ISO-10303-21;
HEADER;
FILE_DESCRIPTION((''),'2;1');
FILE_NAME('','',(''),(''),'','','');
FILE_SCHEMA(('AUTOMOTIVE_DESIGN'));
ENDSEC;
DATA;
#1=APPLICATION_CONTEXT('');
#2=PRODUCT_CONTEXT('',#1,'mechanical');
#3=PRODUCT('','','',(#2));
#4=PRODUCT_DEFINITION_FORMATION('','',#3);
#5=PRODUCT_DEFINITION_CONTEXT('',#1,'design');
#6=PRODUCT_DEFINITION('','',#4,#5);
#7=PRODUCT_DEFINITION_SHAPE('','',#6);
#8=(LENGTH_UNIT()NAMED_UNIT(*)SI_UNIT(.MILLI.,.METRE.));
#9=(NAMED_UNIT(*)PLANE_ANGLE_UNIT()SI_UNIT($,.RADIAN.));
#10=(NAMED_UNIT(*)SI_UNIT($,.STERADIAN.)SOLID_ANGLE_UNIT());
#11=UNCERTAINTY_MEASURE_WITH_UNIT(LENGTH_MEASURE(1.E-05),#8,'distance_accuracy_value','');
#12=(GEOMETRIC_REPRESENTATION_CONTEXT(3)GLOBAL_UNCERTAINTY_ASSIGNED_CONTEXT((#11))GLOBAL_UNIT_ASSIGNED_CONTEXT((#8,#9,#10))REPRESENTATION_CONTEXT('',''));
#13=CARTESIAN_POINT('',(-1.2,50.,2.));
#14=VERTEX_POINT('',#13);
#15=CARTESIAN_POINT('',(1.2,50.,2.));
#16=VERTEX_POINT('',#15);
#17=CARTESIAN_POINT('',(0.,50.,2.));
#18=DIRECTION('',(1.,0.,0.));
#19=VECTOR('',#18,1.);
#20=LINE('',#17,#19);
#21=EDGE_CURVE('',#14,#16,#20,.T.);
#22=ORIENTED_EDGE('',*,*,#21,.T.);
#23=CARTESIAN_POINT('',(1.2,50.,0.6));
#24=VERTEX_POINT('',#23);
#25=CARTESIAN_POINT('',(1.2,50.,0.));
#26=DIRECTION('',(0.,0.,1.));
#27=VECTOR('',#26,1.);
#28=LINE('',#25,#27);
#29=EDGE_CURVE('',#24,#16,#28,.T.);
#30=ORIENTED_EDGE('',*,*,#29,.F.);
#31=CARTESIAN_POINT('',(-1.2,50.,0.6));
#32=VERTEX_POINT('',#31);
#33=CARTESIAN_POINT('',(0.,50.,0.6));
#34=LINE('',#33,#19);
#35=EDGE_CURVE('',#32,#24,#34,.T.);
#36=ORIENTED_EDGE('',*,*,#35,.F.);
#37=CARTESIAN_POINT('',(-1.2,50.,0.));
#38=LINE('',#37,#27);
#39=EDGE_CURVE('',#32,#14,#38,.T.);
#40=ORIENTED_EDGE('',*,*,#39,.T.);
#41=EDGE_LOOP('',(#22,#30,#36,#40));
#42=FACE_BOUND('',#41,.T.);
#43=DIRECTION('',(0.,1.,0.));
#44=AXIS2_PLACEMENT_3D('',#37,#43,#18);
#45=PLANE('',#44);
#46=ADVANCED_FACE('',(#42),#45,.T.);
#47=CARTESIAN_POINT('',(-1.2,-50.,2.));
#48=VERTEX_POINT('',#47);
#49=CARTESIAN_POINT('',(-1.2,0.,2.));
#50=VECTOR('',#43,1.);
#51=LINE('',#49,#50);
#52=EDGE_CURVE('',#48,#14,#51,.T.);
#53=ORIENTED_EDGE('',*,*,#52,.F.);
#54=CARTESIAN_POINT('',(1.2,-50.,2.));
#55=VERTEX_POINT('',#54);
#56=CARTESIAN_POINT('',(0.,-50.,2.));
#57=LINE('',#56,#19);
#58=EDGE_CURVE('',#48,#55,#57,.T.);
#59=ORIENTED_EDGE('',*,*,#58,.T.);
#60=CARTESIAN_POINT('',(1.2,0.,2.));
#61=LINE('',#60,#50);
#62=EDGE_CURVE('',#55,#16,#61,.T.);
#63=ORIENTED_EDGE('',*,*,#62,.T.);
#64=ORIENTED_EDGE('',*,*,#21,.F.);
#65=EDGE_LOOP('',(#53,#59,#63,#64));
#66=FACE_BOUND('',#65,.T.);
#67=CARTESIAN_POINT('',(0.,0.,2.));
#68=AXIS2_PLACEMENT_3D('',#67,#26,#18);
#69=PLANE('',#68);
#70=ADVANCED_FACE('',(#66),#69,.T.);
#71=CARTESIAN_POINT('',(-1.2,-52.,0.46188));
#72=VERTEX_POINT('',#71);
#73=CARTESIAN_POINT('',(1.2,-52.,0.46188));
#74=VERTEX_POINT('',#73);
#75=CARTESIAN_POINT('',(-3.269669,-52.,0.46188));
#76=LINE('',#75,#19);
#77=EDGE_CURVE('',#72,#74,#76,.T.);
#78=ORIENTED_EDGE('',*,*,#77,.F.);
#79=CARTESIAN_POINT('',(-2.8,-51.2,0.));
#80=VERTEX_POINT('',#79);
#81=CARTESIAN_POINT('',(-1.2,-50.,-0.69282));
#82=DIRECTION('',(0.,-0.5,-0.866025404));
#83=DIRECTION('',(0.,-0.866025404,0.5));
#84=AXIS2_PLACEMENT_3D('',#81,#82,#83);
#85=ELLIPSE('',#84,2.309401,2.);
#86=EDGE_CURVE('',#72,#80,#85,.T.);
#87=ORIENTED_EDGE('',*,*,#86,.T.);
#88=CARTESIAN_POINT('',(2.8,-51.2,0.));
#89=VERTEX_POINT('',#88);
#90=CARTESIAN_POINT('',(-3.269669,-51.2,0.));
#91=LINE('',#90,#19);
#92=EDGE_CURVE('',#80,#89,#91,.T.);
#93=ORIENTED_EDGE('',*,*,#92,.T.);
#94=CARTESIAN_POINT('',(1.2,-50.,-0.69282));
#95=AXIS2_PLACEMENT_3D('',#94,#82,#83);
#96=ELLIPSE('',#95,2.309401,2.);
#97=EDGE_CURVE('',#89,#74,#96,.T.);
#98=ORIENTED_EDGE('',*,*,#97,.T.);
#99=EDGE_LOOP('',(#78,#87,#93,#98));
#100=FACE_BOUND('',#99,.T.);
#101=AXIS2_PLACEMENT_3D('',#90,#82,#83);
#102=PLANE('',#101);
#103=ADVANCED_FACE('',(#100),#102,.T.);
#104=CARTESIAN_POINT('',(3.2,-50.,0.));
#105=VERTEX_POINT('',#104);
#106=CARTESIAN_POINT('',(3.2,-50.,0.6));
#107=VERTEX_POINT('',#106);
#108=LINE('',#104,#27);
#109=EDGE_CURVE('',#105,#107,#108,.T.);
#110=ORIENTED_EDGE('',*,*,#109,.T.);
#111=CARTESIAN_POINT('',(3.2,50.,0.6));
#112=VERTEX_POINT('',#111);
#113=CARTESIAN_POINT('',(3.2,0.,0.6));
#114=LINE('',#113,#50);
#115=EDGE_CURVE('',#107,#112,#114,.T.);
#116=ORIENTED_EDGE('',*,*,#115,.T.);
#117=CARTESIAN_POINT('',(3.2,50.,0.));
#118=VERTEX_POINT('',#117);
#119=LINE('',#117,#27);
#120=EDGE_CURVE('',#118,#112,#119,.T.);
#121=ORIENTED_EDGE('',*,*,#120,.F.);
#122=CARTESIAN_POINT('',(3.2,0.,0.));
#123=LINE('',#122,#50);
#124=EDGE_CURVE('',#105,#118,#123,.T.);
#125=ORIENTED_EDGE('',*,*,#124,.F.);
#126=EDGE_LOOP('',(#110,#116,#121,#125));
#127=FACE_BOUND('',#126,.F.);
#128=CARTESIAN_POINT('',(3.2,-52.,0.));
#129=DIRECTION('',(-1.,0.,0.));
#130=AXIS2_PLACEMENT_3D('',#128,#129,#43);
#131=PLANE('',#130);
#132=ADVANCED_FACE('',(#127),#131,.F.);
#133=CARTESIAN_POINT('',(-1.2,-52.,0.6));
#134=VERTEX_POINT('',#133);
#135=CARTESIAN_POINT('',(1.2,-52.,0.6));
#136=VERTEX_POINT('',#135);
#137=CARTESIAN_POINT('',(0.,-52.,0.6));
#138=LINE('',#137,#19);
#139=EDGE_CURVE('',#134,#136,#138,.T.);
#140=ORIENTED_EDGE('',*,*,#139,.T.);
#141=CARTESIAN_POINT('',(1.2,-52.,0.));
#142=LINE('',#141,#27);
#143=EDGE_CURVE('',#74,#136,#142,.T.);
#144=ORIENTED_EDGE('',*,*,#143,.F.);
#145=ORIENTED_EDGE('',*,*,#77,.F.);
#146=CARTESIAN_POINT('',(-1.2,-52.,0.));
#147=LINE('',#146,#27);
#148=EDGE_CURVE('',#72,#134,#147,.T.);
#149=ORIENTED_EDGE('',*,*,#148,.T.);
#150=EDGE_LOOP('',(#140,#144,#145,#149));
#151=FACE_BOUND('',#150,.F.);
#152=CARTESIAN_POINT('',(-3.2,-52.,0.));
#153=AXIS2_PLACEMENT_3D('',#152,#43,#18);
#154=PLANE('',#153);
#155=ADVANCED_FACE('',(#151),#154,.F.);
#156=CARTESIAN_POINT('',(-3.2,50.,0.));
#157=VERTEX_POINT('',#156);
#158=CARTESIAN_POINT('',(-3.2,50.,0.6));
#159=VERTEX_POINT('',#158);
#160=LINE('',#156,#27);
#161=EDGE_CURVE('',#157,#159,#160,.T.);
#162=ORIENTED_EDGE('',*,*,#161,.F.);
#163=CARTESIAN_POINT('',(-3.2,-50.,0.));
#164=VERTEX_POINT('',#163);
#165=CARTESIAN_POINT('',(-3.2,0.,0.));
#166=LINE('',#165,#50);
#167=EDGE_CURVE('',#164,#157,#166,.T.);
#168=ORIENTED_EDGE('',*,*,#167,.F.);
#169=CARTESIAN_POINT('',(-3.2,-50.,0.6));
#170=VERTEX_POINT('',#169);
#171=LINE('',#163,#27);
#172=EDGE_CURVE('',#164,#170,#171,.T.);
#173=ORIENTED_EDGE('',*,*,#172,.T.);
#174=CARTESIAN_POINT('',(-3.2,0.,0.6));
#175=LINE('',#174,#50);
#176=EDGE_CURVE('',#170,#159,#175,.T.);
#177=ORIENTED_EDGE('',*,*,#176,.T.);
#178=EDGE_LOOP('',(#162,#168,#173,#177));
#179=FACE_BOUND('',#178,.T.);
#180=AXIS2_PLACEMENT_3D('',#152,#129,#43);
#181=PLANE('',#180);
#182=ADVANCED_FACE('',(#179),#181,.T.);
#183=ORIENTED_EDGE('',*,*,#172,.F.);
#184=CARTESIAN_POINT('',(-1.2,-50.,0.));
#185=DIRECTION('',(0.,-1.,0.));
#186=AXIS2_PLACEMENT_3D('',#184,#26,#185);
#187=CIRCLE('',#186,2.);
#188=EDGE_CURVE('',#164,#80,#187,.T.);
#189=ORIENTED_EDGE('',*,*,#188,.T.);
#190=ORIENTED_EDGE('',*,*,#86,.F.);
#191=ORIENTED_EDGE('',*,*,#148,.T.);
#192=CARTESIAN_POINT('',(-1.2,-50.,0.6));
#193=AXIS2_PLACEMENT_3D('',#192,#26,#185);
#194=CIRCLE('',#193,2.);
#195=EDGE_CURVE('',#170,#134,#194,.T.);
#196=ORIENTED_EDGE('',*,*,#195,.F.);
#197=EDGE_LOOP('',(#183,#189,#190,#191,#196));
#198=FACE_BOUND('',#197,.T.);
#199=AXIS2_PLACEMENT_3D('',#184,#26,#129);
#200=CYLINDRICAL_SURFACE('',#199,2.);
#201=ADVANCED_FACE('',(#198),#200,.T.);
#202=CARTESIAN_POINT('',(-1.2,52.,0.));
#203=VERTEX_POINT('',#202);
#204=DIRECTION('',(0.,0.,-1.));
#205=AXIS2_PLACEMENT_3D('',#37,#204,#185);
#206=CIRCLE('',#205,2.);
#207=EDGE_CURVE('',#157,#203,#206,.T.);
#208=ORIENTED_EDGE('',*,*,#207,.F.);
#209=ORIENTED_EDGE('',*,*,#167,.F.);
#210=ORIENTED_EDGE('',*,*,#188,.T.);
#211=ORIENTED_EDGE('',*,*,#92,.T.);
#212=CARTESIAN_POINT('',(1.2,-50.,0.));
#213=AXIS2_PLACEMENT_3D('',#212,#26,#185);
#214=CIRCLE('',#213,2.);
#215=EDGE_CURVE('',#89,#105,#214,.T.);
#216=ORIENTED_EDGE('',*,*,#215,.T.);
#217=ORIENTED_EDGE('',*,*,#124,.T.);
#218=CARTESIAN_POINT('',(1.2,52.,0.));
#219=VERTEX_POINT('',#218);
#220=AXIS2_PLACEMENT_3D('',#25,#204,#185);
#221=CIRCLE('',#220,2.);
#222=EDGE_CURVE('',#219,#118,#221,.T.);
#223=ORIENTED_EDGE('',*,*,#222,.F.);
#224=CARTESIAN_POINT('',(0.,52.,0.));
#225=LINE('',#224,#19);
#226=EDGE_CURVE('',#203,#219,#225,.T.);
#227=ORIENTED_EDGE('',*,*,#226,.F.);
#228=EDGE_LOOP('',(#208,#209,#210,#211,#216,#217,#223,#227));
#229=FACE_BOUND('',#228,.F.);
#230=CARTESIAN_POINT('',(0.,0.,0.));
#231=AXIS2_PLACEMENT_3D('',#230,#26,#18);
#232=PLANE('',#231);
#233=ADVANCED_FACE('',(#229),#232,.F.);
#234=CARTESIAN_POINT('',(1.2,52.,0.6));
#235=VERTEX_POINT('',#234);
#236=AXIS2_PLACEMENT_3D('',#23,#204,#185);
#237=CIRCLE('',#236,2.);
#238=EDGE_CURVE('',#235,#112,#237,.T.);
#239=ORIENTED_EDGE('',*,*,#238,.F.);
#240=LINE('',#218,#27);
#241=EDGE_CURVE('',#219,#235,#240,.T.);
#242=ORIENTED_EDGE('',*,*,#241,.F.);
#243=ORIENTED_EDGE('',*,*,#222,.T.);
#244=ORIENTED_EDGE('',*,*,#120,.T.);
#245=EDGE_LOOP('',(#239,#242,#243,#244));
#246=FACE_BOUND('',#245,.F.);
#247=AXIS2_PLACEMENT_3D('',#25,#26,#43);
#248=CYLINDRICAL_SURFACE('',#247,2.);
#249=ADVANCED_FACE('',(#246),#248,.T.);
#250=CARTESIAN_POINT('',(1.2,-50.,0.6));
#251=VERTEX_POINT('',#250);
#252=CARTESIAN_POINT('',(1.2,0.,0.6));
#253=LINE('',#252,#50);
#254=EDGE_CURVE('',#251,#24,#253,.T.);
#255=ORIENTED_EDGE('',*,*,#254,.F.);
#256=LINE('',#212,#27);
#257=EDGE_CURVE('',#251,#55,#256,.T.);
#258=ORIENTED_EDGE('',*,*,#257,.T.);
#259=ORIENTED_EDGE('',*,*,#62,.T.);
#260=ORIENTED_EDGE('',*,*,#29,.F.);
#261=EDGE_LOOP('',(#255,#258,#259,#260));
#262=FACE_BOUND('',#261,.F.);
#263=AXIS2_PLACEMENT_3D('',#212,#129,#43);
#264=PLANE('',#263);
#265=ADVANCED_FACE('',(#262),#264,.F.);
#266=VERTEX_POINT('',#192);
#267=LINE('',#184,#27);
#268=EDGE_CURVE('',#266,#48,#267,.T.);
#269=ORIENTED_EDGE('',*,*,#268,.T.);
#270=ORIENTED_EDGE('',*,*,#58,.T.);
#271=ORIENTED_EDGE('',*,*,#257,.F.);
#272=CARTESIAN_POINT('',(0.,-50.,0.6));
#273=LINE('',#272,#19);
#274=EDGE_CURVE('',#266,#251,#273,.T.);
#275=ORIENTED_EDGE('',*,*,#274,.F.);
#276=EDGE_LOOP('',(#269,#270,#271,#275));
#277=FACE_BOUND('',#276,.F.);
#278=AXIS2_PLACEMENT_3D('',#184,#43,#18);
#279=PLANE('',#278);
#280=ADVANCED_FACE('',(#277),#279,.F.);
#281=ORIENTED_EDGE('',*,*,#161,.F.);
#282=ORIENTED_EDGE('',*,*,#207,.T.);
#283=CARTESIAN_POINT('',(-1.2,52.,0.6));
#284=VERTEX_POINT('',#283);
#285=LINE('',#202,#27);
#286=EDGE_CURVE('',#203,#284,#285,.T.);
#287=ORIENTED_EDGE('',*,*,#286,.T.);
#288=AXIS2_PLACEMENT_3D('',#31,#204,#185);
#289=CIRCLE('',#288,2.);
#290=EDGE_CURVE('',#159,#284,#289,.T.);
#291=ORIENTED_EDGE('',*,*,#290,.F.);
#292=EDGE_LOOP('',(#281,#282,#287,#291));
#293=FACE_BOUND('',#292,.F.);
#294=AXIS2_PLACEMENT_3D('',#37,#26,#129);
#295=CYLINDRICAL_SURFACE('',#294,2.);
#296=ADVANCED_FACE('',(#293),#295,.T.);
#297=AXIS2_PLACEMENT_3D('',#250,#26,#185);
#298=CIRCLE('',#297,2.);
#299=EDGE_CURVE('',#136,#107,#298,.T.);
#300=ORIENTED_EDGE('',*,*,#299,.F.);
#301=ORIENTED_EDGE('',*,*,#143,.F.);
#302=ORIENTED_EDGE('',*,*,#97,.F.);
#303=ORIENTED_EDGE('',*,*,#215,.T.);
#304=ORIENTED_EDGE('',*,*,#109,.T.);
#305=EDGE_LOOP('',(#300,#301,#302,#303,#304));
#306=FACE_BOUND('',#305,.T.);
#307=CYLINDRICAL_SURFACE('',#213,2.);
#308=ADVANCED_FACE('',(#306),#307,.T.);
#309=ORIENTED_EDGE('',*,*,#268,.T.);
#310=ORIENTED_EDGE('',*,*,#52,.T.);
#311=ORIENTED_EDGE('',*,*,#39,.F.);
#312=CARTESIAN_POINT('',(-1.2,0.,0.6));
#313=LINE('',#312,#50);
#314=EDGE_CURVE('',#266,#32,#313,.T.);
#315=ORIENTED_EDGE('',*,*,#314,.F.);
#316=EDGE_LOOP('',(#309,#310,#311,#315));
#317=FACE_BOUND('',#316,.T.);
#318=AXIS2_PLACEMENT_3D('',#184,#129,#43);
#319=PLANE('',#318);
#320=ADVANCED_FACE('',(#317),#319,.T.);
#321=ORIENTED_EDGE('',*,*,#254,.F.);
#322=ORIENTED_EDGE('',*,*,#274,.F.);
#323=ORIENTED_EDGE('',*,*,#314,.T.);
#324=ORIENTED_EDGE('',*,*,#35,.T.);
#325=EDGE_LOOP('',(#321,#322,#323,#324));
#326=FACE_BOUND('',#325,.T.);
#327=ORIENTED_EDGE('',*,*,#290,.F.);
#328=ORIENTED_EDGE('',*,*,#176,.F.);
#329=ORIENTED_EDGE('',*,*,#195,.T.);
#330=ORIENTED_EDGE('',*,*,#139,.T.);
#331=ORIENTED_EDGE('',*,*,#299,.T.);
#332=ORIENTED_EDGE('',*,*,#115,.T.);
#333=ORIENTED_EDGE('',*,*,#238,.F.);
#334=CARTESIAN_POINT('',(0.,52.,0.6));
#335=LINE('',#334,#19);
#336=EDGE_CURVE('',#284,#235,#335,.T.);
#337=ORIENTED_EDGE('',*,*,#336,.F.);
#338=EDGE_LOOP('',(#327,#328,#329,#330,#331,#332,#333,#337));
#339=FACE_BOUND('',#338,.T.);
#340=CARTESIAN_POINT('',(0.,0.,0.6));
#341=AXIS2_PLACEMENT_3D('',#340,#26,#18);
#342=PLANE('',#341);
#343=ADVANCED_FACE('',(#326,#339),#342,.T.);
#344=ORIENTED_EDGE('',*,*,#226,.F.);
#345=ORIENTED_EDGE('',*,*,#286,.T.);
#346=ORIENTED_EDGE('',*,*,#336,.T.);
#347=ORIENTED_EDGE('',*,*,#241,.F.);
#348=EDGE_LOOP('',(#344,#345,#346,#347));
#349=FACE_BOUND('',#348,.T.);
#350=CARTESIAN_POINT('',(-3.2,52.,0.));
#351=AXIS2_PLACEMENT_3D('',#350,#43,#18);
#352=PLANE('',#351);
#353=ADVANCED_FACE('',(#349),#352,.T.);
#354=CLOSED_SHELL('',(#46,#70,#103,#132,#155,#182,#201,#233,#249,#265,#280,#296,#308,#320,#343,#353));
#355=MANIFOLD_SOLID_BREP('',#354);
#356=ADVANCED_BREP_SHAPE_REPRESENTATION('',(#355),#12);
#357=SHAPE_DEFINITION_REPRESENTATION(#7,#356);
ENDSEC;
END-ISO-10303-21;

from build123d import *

# Parameters (mm, degrees)
F0_W        = 6.4
F0_H        = 104
F0_W_2      = 2.4
F0_H_2      = 100
F1_DEPTH    = 0.6
F2_DEPTH    = 2
F3_R        = 2
F4_T1_DEPTH = 6.5393372074


# Not quite as in the source:
# - a fillet or chamfer that OpenCascade refuses, or shapes differently, is made with other operations: its cross-section is extruded or revolved along the edge and cut away or added


with BuildPart() as f1:
    # F0 (on Top) → F1 (new body)
    with BuildSketch(Plane.XY):
        Rectangle(F0_W, F0_H)
        Rectangle(F0_W_2, F0_H_2, mode=Mode.SUBTRACT)
    extrude(amount=F1_DEPTH)

    # F0 (on Top) → F2 (join)
    with BuildSketch(Plane.XY):
        Rectangle(F0_W_2, F0_H_2)
    extrude(amount=F2_DEPTH)

    # F3
    f3_edges = [f1.edges().sort_by_distance(p)[0] for p in [
        (-3.2, -52, 0.3),
        (-3.2, 52, 0.3),
        (3.2, 52, 0.3),
        (3.2, -52, 0.3),
    ]]
    fillet(f3_edges, radius=F3_R)

    # F4: chamfer of 0.8 x 0.4618802154 on 1 edges, made by hand

    # F4_s2 → F4_t1 (cut)
    with BuildSketch(Plane.YZ.offset(-3.2696686037)):
        Polygon((-51.2, 0), (-52, 0.4618802154), (-52, 0), align=None)
    extrude(amount=F4_T1_DEPTH, mode=Mode.SUBTRACT)


solid = f1.part
